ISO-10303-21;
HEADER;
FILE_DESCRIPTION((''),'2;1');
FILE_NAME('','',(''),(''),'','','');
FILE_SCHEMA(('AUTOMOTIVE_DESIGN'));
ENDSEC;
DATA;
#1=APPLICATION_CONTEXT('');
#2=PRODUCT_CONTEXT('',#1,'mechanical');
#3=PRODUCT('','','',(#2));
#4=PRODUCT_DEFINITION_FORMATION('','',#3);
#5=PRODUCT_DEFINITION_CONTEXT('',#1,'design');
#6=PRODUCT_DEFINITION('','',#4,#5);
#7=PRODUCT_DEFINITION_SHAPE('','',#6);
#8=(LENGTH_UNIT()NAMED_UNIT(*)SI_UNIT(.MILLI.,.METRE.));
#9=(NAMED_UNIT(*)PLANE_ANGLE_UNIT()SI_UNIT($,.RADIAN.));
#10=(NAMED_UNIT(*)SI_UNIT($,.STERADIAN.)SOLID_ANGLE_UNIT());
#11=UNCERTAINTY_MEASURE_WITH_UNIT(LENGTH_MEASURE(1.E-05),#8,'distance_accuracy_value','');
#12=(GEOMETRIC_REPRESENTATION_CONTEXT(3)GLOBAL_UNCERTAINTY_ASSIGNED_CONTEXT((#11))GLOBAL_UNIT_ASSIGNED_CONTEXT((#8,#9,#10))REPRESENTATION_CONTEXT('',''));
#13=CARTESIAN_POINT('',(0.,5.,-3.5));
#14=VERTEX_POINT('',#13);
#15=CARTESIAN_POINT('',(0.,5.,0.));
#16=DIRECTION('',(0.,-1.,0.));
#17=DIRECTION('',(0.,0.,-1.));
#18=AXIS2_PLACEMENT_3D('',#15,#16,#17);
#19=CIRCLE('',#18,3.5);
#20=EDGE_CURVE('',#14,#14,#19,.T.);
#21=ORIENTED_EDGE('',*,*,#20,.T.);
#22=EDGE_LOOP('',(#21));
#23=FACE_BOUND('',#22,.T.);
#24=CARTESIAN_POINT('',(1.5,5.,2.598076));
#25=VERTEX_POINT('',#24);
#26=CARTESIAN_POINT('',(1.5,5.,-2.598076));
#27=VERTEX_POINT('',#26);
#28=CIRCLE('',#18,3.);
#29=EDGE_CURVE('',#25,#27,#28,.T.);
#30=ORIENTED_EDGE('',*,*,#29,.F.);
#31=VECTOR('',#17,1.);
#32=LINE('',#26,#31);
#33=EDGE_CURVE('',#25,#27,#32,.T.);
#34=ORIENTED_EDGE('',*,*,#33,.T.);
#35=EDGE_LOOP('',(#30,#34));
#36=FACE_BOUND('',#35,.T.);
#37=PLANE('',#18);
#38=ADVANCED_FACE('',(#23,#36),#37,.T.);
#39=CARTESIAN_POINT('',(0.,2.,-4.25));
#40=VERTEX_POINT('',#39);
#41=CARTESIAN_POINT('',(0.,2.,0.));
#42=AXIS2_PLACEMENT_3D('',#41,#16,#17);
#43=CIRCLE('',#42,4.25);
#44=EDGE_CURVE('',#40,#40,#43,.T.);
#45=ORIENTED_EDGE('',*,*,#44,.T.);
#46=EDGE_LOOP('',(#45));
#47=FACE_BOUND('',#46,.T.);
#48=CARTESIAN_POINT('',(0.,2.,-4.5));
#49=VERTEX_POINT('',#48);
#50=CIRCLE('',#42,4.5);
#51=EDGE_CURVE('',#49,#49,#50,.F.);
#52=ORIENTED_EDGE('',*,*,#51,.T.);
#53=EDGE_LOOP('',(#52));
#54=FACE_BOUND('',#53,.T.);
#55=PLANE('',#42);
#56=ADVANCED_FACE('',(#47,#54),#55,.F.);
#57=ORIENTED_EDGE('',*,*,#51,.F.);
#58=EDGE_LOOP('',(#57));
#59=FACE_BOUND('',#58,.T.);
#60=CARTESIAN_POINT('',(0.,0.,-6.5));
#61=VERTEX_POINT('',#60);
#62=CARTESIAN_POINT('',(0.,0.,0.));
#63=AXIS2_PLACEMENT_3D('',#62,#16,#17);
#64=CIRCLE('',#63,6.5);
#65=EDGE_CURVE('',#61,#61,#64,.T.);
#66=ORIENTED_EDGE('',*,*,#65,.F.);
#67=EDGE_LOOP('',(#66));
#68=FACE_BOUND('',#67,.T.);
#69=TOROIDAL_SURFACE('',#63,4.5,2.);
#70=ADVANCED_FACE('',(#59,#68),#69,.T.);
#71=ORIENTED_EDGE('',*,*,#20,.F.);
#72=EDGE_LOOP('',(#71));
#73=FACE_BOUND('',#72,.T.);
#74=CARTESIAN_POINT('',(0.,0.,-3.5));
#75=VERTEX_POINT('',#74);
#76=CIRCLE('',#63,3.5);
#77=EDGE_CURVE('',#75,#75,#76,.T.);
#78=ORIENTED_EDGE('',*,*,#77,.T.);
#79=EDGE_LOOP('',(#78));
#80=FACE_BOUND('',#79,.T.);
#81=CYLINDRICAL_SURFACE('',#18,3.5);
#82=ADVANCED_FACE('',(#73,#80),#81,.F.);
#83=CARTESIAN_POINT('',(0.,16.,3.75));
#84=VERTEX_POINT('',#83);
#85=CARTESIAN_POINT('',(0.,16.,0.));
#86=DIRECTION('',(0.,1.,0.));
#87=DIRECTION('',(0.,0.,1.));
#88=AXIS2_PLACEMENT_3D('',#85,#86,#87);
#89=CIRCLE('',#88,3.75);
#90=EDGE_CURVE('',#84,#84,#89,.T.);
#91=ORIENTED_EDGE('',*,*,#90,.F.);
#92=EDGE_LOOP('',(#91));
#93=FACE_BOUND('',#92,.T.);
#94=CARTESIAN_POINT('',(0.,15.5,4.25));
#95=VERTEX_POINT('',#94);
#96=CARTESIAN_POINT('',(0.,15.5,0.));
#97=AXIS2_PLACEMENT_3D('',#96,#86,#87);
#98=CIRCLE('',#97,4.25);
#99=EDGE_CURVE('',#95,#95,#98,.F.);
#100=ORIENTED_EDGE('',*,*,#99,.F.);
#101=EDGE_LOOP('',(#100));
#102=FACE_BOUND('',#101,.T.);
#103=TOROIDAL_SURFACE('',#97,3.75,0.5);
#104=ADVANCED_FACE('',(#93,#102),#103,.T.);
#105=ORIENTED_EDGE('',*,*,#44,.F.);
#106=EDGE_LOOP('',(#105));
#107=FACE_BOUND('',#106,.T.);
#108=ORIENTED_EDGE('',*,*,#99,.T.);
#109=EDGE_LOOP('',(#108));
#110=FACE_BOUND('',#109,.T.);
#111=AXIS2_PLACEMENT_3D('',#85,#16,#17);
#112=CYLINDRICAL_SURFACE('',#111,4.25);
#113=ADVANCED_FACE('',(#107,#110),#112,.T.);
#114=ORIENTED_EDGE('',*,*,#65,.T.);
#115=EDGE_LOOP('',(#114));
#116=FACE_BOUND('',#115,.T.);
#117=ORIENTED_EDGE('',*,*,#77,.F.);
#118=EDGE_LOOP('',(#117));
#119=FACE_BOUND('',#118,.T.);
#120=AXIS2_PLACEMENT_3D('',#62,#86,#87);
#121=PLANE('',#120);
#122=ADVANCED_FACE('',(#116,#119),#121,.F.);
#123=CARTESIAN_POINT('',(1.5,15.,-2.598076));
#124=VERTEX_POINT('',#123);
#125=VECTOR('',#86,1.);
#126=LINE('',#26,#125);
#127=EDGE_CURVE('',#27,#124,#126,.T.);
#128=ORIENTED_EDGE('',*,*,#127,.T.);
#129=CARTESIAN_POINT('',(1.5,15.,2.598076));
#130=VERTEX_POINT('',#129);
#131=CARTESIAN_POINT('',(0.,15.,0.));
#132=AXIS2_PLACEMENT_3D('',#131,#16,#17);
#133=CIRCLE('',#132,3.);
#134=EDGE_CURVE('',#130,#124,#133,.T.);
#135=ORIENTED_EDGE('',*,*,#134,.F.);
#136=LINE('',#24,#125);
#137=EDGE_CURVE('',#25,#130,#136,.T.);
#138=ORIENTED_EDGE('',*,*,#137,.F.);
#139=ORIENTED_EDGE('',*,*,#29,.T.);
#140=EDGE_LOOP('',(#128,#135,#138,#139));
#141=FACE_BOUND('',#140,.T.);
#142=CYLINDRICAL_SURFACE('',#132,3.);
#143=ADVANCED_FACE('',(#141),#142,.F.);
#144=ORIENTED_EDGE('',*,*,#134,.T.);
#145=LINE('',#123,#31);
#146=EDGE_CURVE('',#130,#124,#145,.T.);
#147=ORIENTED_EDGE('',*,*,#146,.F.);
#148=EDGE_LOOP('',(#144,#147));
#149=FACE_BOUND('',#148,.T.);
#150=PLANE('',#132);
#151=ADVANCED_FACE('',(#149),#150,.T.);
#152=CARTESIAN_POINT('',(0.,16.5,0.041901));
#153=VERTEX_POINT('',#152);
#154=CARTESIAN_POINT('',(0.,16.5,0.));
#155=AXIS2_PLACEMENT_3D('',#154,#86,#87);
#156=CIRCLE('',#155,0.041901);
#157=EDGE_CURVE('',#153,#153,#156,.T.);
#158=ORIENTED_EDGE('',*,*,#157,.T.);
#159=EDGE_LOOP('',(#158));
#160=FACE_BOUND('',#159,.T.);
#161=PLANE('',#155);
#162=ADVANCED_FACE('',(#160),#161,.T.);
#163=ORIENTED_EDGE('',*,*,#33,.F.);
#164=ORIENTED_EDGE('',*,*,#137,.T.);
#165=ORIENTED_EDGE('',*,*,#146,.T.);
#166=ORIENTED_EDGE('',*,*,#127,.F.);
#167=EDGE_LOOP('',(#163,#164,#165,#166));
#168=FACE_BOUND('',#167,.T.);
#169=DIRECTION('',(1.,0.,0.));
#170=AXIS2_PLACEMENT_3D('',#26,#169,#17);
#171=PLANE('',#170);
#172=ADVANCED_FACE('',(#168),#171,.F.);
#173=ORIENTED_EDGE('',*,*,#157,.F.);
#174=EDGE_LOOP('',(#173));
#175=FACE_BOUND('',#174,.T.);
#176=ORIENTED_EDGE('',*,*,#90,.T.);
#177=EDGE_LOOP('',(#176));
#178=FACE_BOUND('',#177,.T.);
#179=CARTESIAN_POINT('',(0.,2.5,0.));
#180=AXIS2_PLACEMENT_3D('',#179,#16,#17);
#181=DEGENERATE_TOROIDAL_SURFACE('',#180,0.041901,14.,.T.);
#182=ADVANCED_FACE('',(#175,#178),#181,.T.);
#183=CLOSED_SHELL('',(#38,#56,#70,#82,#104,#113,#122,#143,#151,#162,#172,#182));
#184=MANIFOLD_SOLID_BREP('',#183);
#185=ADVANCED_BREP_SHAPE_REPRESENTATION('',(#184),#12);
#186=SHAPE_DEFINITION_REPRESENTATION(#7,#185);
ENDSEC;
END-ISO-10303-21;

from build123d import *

# Parameters (mm, degrees)
SKETCH1_R           = 4.25
BOSS_EXTRUDE1_DEPTH = 16
FILLET1_R           = 0.5
SKETCH3_R           = 3.75
BOSS_EXTRUDE3_DEPTH = 0.5
FILLET2_R           = 14
SKETCH5_R           = 3.5
CUT_EXTRUDE1_DEPTH  = 5
SKETCH6_R           = 3
CUT_EXTRUDE2_DEPTH  = 10
SKETCH7_W           = 1.5
SKETCH7_H           = 5.196152422
BOSS_EXTRUDE5_DEPTH = 10
SKETCH8_R           = 6.5
BOSS_EXTRUDE6_DEPTH = 2
SKETCH9_R           = 3.5
CUT_EXTRUDE3_DEPTH  = 2
FILLET3_R           = 2


# Some blends are built 0.0001 mm under size
with BuildPart() as part:
    # Sketch1 → Boss-Extrude1 (new body)
    with BuildSketch(Plane(origin=(0, 0, 0), x_dir=(1, 0, 0), z_dir=(0, 1, 0))):
        with Locations(Location((0, 0, 0), (0, 0, 270))):
            Circle(SKETCH1_R)
    extrude(amount=BOSS_EXTRUDE1_DEPTH)

    # Fillet1
    fillet1_edges = [part.edges().sort_by_distance(p)[0] for p in [
        (0, 16, -4.25),
    ]]
    fillet(fillet1_edges, radius=FILLET1_R)

    # Sketch3 → Boss-Extrude3 (add)
    with BuildSketch(Plane(origin=(0, 16, 0), x_dir=(1, 0, 0), z_dir=(0, 1, 0))):
        with Locations(Location((0, 0, 0), (0, 0, 270))):
            Circle(SKETCH3_R)
    extrude(amount=BOSS_EXTRUDE3_DEPTH)

    # Fillet2
    # the kernel refuses this fillet: 14 mm, written as the material it takes off along each edge
    with BuildSketch(Plane(origin=(0, 16.5, 0), x_dir=(0, 0, 1), z_dir=(-1, 0, 0))) as fillet2_piece_1:
        with BuildLine():
            CenterArc((0.041900756, -14), FILLET2_R, 74.641114419, 15.358885581)
            Line((0.041900756, 0), (0.041900756, 0.28))
            Line((0.041900756, 0.28), (3.75, 0.28))
            Line((3.75, 0.28), (4.03, 0))
            ThreePointArc((4.03, 0), (4.03, -0.25), (3.824161985, -0.23))
            Line((3.824161985, -0.23), (3.75, -0.5))
        make_face()
    revolve(axis=Axis((0, 16.5, 0), (0, 1, 0)), mode=Mode.SUBTRACT)

    # Sketch5 → Cut-Extrude1 (cut)
    with BuildSketch(Plane.XZ):
        with Locations(Location((0, 0, 0), (0, 0, 270))):
            Circle(SKETCH5_R)
    extrude(amount=-CUT_EXTRUDE1_DEPTH, mode=Mode.SUBTRACT)

    # Sketch6 → Cut-Extrude2 (cut)
    with BuildSketch(Plane.XZ.offset(-5)):
        with Locations(Location((0, 0, 0), (0, 0, 270))):
            Circle(SKETCH6_R)
    extrude(amount=-CUT_EXTRUDE2_DEPTH, mode=Mode.SUBTRACT)

    # Sketch7 → Boss-Extrude5 (add)
    with BuildSketch(Plane.XZ.offset(-15)):
        with Locations((2.25, 0)):
            Rectangle(SKETCH7_W, SKETCH7_H)
    extrude(amount=BOSS_EXTRUDE5_DEPTH)

    # Sketch8 → Boss-Extrude6 (add)
    with BuildSketch(Plane.XZ):
        with Locations(Location((0, 0, 0), (0, 0, 270))):
            Circle(SKETCH8_R)
    extrude(amount=-BOSS_EXTRUDE6_DEPTH)

    # Sketch9 → Cut-Extrude3 (cut)
    with BuildSketch(Plane.XZ):
        with Locations(Location((0, 0, 0), (0, 0, 270))):
            Circle(SKETCH9_R)
    extrude(amount=-CUT_EXTRUDE3_DEPTH, mode=Mode.SUBTRACT)

    # Fillet3
    fillet3_edges = [part.edges().sort_by_distance(p)[0] for p in [
        (0, 2, 6.5),
    ]]
    fillet(fillet3_edges, radius=FILLET3_R - 0.0001)  # a hair under: the kernel refuses the full size


solid = part.part
